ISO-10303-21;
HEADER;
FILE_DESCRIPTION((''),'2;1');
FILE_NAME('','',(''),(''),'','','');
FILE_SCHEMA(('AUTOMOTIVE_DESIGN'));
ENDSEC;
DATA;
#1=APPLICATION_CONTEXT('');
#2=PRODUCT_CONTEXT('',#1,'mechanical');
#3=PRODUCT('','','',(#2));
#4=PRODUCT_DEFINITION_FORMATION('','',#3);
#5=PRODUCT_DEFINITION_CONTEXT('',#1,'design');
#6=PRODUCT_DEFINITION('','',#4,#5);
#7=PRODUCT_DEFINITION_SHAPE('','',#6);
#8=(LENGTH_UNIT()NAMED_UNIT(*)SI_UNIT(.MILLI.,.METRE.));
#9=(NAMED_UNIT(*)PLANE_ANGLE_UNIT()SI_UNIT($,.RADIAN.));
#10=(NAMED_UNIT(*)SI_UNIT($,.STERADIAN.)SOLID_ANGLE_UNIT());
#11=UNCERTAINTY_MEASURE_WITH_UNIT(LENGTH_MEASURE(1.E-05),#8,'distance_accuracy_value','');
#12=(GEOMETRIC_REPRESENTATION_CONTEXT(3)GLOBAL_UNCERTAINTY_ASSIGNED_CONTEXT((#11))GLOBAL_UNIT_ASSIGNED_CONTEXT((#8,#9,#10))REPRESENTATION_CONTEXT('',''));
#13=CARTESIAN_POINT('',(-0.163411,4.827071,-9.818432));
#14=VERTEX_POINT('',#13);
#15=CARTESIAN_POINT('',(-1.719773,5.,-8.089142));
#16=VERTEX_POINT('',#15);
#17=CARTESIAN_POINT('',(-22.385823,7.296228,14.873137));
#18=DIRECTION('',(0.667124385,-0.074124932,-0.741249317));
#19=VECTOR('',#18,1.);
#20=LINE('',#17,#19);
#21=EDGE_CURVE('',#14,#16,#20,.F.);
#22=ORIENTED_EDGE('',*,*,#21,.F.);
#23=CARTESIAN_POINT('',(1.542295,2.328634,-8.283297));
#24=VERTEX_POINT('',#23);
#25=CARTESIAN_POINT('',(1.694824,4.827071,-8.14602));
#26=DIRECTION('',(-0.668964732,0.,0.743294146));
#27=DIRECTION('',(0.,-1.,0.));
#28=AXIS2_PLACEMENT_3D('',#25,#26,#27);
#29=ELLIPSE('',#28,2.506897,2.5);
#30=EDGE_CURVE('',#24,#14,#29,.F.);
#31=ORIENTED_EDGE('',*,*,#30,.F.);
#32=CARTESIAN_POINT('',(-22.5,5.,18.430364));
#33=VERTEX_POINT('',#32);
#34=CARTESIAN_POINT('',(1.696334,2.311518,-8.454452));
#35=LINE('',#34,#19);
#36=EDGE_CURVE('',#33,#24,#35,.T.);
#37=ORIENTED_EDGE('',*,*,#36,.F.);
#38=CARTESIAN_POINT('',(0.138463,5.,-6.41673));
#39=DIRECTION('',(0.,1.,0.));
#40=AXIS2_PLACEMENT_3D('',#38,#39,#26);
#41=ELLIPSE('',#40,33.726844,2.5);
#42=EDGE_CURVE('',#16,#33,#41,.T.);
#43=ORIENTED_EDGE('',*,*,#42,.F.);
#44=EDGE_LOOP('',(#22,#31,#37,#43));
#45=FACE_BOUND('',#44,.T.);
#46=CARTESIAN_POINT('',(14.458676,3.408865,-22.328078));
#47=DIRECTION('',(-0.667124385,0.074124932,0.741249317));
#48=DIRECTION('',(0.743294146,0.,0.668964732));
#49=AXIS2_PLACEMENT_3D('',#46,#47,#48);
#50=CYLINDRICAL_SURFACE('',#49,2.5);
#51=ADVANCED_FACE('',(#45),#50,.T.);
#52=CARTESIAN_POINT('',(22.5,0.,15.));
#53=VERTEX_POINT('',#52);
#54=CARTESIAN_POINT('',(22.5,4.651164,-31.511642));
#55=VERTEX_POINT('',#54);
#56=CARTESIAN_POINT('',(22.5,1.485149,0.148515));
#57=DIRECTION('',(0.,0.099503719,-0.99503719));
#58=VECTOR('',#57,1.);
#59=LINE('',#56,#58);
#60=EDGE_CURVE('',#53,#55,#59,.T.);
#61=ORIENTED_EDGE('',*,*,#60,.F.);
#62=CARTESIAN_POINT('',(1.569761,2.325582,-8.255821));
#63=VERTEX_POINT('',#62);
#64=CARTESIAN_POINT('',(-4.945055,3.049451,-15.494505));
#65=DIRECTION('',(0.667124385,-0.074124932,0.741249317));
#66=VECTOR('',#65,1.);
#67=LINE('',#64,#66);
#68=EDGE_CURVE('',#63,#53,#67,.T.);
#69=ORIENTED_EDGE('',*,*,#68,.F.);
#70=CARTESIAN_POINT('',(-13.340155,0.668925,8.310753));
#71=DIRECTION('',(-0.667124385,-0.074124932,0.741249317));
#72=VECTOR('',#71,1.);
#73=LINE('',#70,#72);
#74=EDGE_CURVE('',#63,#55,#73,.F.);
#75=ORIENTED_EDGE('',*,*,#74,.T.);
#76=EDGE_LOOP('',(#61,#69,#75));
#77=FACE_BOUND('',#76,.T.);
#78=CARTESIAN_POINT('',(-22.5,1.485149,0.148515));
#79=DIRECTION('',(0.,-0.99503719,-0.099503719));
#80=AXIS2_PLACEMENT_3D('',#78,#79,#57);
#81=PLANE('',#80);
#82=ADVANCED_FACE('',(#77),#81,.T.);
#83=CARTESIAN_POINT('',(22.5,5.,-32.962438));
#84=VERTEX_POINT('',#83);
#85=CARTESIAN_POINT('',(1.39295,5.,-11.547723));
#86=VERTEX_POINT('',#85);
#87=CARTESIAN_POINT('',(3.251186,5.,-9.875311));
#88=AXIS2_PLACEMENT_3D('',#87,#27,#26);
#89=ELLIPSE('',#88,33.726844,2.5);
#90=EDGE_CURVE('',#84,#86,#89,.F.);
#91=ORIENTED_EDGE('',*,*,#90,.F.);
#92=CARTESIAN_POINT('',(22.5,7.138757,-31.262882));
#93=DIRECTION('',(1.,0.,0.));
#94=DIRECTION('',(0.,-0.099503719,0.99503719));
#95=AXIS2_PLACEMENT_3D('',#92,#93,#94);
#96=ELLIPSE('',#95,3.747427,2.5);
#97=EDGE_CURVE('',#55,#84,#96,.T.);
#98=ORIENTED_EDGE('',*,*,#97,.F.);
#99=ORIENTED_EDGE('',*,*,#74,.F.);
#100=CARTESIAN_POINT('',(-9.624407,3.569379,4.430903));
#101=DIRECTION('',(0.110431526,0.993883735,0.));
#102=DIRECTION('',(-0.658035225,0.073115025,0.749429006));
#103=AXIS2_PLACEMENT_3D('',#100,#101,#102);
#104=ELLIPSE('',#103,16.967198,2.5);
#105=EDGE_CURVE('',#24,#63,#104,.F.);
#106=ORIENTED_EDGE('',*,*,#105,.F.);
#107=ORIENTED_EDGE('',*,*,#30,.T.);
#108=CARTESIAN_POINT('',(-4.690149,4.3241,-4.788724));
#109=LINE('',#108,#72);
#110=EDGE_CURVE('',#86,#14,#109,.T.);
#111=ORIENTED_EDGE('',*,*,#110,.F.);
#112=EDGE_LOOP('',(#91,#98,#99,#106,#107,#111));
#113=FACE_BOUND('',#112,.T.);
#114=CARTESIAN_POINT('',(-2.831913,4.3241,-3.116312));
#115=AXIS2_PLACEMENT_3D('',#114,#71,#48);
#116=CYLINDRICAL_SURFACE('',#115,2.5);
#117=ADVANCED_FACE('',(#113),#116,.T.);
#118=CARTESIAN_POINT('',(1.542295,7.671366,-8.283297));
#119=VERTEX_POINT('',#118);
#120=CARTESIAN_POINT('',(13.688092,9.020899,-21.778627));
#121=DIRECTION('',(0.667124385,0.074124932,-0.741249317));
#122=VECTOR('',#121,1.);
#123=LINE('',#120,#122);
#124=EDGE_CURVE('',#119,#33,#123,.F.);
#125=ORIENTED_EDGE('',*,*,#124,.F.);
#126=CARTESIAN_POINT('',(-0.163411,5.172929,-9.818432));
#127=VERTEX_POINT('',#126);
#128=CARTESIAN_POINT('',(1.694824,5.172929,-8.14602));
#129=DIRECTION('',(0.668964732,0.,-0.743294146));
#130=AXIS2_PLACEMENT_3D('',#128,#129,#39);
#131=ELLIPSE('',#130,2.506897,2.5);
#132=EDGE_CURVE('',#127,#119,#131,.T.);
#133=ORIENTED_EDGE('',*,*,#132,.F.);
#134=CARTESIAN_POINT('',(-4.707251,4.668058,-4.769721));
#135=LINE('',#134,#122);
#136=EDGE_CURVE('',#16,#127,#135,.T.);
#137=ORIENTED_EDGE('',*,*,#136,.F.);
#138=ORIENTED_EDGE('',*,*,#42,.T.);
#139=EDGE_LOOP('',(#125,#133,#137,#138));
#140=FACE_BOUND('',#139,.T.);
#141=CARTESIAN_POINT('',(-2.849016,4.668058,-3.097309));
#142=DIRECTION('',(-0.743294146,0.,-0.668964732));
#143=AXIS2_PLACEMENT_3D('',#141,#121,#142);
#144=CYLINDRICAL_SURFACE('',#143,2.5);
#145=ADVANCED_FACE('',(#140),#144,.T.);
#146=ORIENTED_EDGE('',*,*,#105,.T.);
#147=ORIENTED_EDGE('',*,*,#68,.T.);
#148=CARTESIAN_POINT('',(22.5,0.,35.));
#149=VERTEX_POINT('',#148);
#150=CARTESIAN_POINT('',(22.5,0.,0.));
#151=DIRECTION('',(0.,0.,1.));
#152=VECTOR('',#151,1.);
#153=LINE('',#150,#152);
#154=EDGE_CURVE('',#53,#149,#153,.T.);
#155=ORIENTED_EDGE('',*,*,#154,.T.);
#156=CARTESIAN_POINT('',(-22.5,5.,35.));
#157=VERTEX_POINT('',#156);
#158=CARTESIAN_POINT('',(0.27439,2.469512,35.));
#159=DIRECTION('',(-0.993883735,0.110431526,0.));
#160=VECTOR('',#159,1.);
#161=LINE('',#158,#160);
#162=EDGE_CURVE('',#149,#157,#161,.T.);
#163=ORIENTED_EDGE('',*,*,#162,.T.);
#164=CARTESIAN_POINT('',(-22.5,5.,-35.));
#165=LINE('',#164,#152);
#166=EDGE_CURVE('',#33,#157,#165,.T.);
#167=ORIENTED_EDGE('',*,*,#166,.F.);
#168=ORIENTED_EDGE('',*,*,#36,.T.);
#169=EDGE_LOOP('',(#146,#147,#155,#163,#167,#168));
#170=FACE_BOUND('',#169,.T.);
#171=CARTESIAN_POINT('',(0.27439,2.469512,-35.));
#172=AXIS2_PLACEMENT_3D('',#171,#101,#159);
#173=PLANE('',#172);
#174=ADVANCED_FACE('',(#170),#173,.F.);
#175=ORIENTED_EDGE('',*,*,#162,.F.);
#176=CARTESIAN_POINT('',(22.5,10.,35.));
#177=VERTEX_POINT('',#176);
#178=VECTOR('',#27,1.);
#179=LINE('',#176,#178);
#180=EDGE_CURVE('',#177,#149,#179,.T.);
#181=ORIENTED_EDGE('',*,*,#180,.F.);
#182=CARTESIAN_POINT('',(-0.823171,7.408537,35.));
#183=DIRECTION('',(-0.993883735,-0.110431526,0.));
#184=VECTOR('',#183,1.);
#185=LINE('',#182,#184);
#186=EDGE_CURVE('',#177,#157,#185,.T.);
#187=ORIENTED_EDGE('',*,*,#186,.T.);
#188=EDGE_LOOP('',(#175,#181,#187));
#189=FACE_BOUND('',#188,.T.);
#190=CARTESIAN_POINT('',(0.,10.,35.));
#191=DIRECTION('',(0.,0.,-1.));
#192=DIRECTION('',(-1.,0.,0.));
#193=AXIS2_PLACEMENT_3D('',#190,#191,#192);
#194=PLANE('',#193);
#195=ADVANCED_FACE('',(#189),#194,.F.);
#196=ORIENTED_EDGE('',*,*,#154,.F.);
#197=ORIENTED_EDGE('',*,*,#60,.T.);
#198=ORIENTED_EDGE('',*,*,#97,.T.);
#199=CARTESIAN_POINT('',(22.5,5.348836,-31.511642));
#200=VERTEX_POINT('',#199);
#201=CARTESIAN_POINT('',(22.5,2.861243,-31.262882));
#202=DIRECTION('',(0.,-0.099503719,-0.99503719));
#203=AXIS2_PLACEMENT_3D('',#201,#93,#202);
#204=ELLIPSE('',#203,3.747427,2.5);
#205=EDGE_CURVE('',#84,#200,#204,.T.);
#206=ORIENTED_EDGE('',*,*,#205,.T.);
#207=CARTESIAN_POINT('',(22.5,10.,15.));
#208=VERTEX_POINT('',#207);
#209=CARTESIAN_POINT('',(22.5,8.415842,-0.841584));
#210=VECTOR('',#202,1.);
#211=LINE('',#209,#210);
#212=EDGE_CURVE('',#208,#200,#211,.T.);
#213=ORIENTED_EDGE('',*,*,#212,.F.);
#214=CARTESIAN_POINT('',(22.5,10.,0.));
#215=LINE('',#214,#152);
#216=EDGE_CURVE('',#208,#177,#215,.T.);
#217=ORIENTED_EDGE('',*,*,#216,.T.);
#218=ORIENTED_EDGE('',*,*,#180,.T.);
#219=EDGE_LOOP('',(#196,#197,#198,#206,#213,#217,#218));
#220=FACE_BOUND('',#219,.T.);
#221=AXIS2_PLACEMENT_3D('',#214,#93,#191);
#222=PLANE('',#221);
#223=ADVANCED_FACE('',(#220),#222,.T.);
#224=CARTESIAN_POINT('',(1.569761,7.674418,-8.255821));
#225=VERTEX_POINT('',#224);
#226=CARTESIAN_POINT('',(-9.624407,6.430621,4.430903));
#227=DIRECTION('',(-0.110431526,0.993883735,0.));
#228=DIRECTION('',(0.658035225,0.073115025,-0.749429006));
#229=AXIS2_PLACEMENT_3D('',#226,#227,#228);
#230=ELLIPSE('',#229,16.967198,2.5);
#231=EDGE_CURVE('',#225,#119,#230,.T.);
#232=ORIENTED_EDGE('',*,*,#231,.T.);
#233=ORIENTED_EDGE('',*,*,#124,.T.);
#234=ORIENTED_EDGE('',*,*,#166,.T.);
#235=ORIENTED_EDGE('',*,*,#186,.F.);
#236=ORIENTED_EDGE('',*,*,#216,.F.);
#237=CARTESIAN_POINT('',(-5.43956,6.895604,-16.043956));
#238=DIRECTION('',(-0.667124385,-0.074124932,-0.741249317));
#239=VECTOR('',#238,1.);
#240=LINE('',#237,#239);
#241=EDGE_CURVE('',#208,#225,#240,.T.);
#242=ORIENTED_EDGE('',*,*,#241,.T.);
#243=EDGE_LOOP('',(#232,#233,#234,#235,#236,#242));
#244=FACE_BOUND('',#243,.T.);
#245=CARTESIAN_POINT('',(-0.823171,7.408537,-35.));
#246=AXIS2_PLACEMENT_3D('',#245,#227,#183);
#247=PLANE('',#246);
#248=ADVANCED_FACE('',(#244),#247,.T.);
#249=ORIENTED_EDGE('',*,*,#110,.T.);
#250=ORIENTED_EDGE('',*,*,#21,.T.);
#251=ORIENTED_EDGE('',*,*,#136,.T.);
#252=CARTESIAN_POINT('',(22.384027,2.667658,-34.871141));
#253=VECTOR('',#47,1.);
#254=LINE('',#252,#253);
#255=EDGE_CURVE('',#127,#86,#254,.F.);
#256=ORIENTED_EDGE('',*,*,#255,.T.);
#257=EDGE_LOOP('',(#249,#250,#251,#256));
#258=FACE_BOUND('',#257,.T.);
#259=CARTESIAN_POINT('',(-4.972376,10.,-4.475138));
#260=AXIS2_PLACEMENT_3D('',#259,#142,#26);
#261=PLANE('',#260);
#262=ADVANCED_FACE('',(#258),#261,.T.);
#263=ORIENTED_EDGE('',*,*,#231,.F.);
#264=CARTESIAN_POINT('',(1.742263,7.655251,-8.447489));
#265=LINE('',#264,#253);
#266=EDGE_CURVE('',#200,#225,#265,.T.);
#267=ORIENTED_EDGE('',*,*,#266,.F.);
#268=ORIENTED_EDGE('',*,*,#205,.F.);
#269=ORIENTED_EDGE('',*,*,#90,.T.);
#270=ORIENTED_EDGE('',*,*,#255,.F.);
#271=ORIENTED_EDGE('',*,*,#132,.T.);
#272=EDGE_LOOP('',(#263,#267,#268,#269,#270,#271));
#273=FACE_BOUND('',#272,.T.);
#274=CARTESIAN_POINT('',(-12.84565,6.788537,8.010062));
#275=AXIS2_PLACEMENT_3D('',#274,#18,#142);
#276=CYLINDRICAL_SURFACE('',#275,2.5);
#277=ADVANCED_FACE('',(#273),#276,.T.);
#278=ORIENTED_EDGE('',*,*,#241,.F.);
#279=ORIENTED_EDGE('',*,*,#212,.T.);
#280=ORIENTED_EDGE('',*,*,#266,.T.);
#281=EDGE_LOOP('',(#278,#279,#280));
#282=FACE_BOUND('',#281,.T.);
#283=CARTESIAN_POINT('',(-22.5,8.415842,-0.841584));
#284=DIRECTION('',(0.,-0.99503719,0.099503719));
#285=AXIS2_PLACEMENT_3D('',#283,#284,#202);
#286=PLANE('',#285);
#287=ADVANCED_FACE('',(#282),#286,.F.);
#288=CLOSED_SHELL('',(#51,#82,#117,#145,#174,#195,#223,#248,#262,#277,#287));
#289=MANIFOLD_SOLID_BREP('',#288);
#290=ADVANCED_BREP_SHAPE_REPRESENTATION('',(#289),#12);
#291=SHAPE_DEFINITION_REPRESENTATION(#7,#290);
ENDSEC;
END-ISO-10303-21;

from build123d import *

# Parameters (mm, degrees)
BOSS_EXTRUDE1_DEPTH = 10
CUT_EXTRUDE1_DEPTH  = 58.879184514
CUT_EXTRUDE2_DEPTH  = 75.204110398
FILLET1_R           = 2.5


with BuildPart() as part:
    # Sketch1 → Boss-Extrude1 (new body)
    with BuildSketch(Plane(origin=(0, 0, 0), x_dir=(1, 0, 0), z_dir=(0, 1, 0))):
        Polygon((-22.5, -15), (22.5, 35), (22.5, -35), (-22.5, -35), align=None)
    extrude(amount=BOSS_EXTRUDE1_DEPTH)

    # Sketch2 → Cut-Extrude1 (cut, through all)
    with BuildSketch(Plane(origin=(22.5, 0, 0), x_dir=(0, 0, -1), z_dir=(1, 0, 0))):
        Polygon((35, 0), (35, 5), (-15, 0), align=None)
        Polygon((35, 10), (-15, 10), (35, 5), align=None)
    extrude(amount=-CUT_EXTRUDE1_DEPTH, mode=Mode.SUBTRACT)

    # Sketch3 → Cut-Extrude2 (cut, through all)
    with BuildSketch(Plane.XY.offset(35)):
        Polygon((-22.5, 10), (-22.5, 5), (22.5, 10), align=None)
        Polygon((-22.5, 0), (22.5, 0), (-22.5, 5), align=None)
    extrude(amount=-CUT_EXTRUDE2_DEPTH, mode=Mode.SUBTRACT)

    # Fillet1
    # the kernel refuses this fillet: 2.5 mm, written as the material it takes off along each edge
    with BuildSketch(Plane(origin=(-3.900636109, 2.066595988, -5.665959879), x_dir=(-0.049586965018551935, 0.9972489631508745, 0.0550966277983907), z_dir=(0.667124384994991, 0.07412493166611012, -0.7412493166611013)), Plane(origin=(26.400636109, 4.566595988, -39.334040121), x_dir=(-0.04958696501855178, -0.9972489631508747, 0.05509662779839086), z_dir=(-0.667124384994991, 0.07412493166611012, 0.7412493166611013))) as fillet1_piece_1:
        with BuildLine():
            CenterArc((FILLET1_R * 0.935510365796, FILLET1_R), FILLET1_R, 183.816685755, 86.183314245)
            Line((-FILLET1_R * 0.0622717598086, FILLET1_R * 0.93343552131), (0, 0))
            Line((0, 0), (FILLET1_R * 0.935510365796, 0))
        make_face()
    extrude(amount=45.420723481, mode=Mode.SUBTRACT)
    with BuildSketch(Plane(origin=(3.840238573, 7.926693175, -14.266931748), x_dir=(0.04958696501855149, -0.9972489631508746, -0.05509662779839123), z_dir=(-0.6671243849949912, -0.07412493166611021, 0.7412493166611013)), Plane(origin=(-26.340238573, 5.426693175, 19.266931748), x_dir=(0.04958696501855112, 0.9972489631508746, -0.05509662779839134), z_dir=(0.6671243849949912, -0.07412493166611005, -0.7412493166611013))) as fillet1_piece_2:
        with BuildLine():
            CenterArc((FILLET1_R * 0.921024902586, FILLET1_R), FILLET1_R, 184.708312873, 85.291687127)
            Line((-FILLET1_R * 0.0756005855297, FILLET1_R * 0.917916893107), (0, 0))
            Line((0, 0), (FILLET1_R * 0.921024902586, 0))
        make_face()
    extrude(amount=45.23965519, mode=Mode.SUBTRACT)


solid = part.part
